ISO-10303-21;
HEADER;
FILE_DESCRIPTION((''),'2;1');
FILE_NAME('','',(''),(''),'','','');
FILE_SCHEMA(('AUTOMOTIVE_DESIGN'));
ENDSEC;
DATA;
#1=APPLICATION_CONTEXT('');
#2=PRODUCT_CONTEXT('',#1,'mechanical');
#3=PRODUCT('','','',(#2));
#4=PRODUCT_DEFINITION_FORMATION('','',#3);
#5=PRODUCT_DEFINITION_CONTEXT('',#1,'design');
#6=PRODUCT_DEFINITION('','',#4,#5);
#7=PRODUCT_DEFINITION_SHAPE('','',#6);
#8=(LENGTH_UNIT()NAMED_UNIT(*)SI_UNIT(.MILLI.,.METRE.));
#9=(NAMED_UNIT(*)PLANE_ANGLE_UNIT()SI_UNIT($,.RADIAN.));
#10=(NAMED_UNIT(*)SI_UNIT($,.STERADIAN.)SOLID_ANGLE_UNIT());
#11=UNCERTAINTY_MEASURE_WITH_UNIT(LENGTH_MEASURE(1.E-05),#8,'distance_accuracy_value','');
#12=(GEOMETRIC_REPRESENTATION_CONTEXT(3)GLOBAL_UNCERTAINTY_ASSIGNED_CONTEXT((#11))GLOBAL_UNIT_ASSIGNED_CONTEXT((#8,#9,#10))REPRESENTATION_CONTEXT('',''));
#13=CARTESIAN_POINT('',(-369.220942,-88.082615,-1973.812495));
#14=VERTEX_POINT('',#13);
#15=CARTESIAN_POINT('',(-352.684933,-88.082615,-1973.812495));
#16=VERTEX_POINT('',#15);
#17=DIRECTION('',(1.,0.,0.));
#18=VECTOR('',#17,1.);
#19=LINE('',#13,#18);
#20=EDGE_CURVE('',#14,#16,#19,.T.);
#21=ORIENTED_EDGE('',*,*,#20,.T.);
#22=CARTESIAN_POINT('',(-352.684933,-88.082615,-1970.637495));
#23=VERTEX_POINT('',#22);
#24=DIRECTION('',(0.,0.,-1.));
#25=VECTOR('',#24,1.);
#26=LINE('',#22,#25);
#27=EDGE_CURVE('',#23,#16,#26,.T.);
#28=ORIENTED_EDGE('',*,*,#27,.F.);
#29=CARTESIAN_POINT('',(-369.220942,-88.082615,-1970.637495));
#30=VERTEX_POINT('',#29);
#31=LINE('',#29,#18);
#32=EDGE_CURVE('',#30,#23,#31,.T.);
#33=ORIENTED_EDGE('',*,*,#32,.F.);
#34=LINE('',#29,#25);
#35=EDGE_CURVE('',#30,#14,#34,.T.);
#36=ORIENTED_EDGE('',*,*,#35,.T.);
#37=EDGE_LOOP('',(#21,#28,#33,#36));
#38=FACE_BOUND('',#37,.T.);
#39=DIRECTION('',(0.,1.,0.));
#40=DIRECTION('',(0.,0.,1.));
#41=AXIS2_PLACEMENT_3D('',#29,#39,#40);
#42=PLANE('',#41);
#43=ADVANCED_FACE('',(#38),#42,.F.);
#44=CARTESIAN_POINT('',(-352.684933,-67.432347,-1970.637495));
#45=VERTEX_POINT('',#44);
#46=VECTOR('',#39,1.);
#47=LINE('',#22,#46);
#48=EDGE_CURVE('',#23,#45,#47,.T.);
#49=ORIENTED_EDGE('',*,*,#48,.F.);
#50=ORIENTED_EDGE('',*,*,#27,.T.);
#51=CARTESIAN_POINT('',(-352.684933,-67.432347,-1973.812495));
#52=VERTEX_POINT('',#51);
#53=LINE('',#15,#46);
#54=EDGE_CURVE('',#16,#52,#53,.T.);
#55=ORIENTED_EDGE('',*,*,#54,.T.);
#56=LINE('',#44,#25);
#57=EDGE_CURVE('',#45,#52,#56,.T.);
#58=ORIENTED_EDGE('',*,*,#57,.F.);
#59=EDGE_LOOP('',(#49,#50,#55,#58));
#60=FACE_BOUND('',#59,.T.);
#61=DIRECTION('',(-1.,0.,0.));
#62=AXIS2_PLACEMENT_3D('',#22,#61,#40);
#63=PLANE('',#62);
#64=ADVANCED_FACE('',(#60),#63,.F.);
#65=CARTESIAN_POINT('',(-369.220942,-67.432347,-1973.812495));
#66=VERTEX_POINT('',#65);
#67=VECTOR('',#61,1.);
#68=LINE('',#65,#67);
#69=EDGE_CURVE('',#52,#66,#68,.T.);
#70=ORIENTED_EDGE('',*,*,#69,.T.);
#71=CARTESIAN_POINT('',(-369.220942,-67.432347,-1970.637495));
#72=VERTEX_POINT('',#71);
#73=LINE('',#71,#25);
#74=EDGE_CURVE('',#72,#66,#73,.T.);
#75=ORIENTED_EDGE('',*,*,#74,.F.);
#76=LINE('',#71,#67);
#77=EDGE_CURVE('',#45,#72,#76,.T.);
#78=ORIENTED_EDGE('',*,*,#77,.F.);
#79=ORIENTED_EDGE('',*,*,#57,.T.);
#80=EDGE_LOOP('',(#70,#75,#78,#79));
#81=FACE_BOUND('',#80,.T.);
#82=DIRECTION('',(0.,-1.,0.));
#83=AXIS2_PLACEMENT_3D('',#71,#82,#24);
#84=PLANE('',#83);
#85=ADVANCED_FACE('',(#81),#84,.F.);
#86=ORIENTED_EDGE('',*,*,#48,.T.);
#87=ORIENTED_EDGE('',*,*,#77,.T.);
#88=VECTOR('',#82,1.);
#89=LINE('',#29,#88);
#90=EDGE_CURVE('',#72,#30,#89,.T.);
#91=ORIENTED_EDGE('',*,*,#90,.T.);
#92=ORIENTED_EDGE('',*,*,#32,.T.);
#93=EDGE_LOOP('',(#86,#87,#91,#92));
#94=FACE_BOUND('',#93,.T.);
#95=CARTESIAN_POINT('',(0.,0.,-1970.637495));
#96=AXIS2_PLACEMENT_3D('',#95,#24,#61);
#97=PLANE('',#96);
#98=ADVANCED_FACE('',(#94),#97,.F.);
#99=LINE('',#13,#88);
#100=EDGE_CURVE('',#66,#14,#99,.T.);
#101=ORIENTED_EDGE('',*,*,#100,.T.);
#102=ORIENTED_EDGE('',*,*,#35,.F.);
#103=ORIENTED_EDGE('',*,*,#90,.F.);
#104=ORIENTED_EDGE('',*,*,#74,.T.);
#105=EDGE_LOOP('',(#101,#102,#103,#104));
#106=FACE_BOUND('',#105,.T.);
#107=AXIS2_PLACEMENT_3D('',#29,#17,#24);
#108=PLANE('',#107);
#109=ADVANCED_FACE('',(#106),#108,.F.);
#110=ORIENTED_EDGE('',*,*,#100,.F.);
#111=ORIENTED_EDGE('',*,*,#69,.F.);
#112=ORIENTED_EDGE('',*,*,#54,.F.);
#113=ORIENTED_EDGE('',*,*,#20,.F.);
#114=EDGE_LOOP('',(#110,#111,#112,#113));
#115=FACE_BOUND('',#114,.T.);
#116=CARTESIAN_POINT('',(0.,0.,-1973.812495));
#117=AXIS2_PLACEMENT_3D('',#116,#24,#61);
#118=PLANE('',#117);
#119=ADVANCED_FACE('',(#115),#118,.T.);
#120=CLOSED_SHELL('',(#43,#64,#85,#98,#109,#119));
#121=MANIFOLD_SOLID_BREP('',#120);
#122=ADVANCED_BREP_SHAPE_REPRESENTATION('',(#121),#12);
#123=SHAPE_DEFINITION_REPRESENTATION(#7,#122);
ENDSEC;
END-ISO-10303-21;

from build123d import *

# Parameters (mm, degrees)
SKETCH1_W          = 16.536008519
SKETCH1_H          = 20.650267989
BASE_FLANGE1_DEPTH = 3.175


# Sheet-metal steps are written as plain solids
with BuildPart() as part:
    # Sketch1 → Base-Flange1 (new body)
    with BuildSketch(Plane.XY.offset(-1973.812495)):
        with Locations((-360.952937726, -77.757480971)):
            Rectangle(SKETCH1_W, SKETCH1_H)
    extrude(amount=BASE_FLANGE1_DEPTH)


solid = part.part
